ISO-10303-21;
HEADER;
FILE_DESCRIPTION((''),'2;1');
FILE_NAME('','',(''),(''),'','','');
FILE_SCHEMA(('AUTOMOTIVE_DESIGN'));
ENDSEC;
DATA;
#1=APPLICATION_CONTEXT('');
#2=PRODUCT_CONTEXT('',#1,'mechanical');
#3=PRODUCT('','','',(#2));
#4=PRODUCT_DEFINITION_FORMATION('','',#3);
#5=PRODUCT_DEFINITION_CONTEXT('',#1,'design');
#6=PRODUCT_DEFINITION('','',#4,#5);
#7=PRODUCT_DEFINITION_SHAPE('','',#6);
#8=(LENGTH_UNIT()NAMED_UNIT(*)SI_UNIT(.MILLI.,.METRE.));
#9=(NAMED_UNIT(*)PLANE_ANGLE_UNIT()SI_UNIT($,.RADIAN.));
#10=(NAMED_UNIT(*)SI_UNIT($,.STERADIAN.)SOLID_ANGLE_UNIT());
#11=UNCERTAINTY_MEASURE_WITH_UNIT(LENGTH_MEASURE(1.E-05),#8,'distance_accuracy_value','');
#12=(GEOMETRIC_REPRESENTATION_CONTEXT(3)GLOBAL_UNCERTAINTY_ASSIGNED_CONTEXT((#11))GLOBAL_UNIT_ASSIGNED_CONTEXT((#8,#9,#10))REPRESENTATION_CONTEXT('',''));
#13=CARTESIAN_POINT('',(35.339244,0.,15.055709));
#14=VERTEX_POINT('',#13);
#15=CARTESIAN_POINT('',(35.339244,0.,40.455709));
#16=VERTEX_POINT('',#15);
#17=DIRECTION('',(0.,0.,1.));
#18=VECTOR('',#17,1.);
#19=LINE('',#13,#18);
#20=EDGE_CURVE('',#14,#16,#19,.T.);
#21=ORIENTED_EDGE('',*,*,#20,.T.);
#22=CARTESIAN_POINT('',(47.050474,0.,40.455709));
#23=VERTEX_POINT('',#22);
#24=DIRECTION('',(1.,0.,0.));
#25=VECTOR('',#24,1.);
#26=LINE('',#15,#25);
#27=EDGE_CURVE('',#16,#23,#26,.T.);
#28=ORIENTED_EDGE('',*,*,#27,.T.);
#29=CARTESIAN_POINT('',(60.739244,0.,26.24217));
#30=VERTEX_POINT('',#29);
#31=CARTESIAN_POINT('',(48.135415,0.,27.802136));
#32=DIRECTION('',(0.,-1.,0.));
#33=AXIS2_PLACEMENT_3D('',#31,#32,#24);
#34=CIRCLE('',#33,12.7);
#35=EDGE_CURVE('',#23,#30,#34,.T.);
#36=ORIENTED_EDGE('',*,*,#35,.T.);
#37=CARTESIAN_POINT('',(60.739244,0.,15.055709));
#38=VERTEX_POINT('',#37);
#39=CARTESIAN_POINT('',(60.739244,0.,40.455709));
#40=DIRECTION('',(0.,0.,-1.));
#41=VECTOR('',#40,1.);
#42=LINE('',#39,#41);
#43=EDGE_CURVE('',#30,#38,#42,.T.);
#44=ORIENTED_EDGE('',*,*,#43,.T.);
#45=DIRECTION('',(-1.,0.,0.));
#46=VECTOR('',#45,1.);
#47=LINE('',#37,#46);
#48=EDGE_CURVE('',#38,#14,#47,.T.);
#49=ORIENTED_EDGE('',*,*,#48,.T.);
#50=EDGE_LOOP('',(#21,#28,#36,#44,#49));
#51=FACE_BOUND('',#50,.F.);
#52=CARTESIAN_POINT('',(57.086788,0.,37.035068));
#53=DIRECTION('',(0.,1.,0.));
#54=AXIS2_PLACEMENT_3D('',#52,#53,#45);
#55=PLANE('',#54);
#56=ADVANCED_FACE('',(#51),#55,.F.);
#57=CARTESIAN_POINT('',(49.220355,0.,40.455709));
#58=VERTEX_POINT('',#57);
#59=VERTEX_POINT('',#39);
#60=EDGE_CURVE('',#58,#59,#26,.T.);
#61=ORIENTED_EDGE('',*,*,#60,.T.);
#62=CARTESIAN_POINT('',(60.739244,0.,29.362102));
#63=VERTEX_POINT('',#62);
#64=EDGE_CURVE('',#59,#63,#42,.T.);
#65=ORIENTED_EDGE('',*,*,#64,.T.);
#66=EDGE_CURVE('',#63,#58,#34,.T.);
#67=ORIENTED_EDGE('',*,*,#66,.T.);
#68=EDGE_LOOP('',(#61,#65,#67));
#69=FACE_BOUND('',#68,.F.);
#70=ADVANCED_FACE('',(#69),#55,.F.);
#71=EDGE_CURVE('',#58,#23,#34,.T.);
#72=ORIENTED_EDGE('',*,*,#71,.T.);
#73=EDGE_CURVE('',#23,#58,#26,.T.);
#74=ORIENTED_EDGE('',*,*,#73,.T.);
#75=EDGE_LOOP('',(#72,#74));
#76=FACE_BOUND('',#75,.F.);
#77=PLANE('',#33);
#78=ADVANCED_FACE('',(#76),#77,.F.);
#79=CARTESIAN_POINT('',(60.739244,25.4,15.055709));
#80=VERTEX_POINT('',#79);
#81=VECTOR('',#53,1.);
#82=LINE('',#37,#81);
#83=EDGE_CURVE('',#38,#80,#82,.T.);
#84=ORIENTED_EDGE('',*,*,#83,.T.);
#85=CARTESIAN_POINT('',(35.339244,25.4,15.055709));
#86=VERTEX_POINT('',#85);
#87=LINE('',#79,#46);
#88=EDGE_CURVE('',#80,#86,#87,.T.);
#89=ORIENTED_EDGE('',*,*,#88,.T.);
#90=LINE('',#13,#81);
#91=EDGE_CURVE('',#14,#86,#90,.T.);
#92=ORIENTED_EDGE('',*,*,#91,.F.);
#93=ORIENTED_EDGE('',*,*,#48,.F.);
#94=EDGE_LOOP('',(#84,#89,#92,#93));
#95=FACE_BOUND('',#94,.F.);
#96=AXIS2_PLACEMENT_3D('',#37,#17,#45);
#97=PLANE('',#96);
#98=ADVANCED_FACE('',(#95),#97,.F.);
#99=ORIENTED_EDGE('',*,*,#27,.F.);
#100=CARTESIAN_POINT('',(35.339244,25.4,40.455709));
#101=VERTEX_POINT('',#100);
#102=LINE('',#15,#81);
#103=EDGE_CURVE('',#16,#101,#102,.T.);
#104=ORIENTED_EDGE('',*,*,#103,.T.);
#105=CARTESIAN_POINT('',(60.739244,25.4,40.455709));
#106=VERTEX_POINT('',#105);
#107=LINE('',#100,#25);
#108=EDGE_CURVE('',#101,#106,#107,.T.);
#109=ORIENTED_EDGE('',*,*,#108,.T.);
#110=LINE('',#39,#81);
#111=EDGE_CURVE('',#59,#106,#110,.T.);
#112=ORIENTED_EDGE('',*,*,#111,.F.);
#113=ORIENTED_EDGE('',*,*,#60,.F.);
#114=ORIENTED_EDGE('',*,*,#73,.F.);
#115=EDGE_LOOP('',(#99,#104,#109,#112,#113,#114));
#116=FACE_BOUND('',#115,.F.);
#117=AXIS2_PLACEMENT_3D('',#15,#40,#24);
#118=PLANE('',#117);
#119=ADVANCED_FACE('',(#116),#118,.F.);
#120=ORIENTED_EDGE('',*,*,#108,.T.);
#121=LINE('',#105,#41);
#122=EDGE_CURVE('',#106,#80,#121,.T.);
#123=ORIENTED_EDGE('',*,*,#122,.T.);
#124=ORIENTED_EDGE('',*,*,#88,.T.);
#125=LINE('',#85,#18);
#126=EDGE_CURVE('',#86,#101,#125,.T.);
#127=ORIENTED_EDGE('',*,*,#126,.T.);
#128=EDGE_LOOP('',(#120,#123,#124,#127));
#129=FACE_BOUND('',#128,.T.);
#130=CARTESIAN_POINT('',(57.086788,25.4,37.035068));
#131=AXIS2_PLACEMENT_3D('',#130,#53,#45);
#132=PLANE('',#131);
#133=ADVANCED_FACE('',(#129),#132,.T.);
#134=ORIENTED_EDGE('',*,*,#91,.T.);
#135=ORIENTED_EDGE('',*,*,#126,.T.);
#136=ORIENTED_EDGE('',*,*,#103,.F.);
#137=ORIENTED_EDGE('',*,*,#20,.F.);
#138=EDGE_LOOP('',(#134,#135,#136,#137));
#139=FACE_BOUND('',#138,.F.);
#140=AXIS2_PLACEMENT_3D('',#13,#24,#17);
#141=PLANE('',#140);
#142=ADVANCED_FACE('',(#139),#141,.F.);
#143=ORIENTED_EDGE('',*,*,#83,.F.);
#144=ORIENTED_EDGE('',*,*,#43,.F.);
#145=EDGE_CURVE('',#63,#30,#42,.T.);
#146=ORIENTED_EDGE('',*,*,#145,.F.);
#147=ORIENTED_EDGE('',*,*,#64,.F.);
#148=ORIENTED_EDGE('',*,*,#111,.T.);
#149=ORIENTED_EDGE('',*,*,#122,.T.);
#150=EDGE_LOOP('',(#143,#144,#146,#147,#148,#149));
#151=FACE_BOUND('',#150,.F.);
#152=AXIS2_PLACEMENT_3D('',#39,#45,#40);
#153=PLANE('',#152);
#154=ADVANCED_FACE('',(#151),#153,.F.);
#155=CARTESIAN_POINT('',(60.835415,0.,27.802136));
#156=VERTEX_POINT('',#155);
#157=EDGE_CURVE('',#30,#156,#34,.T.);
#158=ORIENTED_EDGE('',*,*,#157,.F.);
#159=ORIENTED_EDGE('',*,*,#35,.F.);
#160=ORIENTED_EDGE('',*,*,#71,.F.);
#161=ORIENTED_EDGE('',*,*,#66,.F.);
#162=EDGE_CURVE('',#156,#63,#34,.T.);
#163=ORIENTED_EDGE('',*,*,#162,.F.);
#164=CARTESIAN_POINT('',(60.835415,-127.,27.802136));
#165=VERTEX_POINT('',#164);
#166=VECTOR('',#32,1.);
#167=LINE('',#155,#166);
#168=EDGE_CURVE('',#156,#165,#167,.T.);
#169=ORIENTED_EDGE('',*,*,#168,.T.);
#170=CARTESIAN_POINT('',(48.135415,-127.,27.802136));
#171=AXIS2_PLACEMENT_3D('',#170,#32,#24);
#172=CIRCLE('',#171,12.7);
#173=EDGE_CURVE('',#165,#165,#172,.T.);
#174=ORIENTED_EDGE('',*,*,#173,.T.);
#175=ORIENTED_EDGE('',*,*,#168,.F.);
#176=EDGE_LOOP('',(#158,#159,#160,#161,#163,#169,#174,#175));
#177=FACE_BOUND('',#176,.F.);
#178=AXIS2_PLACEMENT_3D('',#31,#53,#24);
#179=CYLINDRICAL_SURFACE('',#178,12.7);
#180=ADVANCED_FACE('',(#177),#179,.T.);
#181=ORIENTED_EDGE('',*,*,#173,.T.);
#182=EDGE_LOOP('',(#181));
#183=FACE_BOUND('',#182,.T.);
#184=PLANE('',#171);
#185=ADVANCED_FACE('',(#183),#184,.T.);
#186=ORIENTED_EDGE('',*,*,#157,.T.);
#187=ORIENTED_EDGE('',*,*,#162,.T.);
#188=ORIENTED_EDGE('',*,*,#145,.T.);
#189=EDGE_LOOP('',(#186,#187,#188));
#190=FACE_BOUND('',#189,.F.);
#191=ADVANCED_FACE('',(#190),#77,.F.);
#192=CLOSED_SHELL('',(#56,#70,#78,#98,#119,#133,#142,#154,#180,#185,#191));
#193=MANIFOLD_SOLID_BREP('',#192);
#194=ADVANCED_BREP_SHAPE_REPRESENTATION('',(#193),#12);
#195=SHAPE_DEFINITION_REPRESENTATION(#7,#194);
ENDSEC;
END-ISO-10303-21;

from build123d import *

# Parameters (mm, degrees)
F0_R     = 12.7
F1_DEPTH = 127
F5_DEPTH = 25.4


# Not quite as in the source:
# - the program builds the solid bodies; features that only make, move or delete a surface that nothing else refers to are left out


with BuildPart() as f1:
    # F0 (on Front) → F1 (new body)
    with BuildSketch(Plane.XZ):
        with Locations((48.1354147196, 27.8021357954)):
            Circle(F0_R)
    extrude(amount=F1_DEPTH)

    # F2 (on face) → F5 (join)
    with BuildSketch(Plane(origin=(0, 0, 0), x_dir=(-1, 0, 0), z_dir=(0, 1, 0))):
        with BuildLine():
            Line((-49.2203550876, 40.4557085872), (-60.73924371, 40.4557085872))
            Line((-60.73924371, 40.4557085872), (-60.73924371, 29.3621020704))
            ThreePointArc((-60.73924371, 29.3621020704), (-56.94521767, 36.9496694507), (-49.2203550876, 40.4557085872))
        make_face()
        with BuildLine():
            Line((-35.33924371, 40.4557085872), (-47.0504743515, 40.4557085872))
            ThreePointArc((-47.0504743515, 40.4557085872), (-38.7794342078, 36.3902455212), (-35.4354147196, 27.8021357954))
            ThreePointArc((-35.4354147196, 27.8021357954), (-47.3539507661, 15.126201349), (-60.73924371, 26.2421695203))
            Line((-60.73924371, 26.2421695203), (-60.73924371, 15.0557085872))
            Line((-60.73924371, 15.0557085872), (-35.33924371, 15.0557085872))
            Line((-35.33924371, 15.0557085872), (-35.33924371, 40.4557085872))
        make_face()
        with BuildLine():
            Line((-47.0504743515, 40.4557085872), (-49.2203550876, 40.4557085872))
            ThreePointArc((-49.2203550876, 40.4557085872), (-56.94521767, 36.9496694507), (-60.73924371, 29.3621020704))
            Line((-60.73924371, 29.3621020704), (-60.73924371, 26.2421695203))
            ThreePointArc((-60.73924371, 26.2421695203), (-47.3539507661, 15.126201349), (-35.4354147196, 27.8021357954))
            ThreePointArc((-35.4354147196, 27.8021357954), (-38.7794342078, 36.3902455212), (-47.0504743515, 40.4557085872))
        make_face()
    extrude(amount=F5_DEPTH)


solid = f1.part
